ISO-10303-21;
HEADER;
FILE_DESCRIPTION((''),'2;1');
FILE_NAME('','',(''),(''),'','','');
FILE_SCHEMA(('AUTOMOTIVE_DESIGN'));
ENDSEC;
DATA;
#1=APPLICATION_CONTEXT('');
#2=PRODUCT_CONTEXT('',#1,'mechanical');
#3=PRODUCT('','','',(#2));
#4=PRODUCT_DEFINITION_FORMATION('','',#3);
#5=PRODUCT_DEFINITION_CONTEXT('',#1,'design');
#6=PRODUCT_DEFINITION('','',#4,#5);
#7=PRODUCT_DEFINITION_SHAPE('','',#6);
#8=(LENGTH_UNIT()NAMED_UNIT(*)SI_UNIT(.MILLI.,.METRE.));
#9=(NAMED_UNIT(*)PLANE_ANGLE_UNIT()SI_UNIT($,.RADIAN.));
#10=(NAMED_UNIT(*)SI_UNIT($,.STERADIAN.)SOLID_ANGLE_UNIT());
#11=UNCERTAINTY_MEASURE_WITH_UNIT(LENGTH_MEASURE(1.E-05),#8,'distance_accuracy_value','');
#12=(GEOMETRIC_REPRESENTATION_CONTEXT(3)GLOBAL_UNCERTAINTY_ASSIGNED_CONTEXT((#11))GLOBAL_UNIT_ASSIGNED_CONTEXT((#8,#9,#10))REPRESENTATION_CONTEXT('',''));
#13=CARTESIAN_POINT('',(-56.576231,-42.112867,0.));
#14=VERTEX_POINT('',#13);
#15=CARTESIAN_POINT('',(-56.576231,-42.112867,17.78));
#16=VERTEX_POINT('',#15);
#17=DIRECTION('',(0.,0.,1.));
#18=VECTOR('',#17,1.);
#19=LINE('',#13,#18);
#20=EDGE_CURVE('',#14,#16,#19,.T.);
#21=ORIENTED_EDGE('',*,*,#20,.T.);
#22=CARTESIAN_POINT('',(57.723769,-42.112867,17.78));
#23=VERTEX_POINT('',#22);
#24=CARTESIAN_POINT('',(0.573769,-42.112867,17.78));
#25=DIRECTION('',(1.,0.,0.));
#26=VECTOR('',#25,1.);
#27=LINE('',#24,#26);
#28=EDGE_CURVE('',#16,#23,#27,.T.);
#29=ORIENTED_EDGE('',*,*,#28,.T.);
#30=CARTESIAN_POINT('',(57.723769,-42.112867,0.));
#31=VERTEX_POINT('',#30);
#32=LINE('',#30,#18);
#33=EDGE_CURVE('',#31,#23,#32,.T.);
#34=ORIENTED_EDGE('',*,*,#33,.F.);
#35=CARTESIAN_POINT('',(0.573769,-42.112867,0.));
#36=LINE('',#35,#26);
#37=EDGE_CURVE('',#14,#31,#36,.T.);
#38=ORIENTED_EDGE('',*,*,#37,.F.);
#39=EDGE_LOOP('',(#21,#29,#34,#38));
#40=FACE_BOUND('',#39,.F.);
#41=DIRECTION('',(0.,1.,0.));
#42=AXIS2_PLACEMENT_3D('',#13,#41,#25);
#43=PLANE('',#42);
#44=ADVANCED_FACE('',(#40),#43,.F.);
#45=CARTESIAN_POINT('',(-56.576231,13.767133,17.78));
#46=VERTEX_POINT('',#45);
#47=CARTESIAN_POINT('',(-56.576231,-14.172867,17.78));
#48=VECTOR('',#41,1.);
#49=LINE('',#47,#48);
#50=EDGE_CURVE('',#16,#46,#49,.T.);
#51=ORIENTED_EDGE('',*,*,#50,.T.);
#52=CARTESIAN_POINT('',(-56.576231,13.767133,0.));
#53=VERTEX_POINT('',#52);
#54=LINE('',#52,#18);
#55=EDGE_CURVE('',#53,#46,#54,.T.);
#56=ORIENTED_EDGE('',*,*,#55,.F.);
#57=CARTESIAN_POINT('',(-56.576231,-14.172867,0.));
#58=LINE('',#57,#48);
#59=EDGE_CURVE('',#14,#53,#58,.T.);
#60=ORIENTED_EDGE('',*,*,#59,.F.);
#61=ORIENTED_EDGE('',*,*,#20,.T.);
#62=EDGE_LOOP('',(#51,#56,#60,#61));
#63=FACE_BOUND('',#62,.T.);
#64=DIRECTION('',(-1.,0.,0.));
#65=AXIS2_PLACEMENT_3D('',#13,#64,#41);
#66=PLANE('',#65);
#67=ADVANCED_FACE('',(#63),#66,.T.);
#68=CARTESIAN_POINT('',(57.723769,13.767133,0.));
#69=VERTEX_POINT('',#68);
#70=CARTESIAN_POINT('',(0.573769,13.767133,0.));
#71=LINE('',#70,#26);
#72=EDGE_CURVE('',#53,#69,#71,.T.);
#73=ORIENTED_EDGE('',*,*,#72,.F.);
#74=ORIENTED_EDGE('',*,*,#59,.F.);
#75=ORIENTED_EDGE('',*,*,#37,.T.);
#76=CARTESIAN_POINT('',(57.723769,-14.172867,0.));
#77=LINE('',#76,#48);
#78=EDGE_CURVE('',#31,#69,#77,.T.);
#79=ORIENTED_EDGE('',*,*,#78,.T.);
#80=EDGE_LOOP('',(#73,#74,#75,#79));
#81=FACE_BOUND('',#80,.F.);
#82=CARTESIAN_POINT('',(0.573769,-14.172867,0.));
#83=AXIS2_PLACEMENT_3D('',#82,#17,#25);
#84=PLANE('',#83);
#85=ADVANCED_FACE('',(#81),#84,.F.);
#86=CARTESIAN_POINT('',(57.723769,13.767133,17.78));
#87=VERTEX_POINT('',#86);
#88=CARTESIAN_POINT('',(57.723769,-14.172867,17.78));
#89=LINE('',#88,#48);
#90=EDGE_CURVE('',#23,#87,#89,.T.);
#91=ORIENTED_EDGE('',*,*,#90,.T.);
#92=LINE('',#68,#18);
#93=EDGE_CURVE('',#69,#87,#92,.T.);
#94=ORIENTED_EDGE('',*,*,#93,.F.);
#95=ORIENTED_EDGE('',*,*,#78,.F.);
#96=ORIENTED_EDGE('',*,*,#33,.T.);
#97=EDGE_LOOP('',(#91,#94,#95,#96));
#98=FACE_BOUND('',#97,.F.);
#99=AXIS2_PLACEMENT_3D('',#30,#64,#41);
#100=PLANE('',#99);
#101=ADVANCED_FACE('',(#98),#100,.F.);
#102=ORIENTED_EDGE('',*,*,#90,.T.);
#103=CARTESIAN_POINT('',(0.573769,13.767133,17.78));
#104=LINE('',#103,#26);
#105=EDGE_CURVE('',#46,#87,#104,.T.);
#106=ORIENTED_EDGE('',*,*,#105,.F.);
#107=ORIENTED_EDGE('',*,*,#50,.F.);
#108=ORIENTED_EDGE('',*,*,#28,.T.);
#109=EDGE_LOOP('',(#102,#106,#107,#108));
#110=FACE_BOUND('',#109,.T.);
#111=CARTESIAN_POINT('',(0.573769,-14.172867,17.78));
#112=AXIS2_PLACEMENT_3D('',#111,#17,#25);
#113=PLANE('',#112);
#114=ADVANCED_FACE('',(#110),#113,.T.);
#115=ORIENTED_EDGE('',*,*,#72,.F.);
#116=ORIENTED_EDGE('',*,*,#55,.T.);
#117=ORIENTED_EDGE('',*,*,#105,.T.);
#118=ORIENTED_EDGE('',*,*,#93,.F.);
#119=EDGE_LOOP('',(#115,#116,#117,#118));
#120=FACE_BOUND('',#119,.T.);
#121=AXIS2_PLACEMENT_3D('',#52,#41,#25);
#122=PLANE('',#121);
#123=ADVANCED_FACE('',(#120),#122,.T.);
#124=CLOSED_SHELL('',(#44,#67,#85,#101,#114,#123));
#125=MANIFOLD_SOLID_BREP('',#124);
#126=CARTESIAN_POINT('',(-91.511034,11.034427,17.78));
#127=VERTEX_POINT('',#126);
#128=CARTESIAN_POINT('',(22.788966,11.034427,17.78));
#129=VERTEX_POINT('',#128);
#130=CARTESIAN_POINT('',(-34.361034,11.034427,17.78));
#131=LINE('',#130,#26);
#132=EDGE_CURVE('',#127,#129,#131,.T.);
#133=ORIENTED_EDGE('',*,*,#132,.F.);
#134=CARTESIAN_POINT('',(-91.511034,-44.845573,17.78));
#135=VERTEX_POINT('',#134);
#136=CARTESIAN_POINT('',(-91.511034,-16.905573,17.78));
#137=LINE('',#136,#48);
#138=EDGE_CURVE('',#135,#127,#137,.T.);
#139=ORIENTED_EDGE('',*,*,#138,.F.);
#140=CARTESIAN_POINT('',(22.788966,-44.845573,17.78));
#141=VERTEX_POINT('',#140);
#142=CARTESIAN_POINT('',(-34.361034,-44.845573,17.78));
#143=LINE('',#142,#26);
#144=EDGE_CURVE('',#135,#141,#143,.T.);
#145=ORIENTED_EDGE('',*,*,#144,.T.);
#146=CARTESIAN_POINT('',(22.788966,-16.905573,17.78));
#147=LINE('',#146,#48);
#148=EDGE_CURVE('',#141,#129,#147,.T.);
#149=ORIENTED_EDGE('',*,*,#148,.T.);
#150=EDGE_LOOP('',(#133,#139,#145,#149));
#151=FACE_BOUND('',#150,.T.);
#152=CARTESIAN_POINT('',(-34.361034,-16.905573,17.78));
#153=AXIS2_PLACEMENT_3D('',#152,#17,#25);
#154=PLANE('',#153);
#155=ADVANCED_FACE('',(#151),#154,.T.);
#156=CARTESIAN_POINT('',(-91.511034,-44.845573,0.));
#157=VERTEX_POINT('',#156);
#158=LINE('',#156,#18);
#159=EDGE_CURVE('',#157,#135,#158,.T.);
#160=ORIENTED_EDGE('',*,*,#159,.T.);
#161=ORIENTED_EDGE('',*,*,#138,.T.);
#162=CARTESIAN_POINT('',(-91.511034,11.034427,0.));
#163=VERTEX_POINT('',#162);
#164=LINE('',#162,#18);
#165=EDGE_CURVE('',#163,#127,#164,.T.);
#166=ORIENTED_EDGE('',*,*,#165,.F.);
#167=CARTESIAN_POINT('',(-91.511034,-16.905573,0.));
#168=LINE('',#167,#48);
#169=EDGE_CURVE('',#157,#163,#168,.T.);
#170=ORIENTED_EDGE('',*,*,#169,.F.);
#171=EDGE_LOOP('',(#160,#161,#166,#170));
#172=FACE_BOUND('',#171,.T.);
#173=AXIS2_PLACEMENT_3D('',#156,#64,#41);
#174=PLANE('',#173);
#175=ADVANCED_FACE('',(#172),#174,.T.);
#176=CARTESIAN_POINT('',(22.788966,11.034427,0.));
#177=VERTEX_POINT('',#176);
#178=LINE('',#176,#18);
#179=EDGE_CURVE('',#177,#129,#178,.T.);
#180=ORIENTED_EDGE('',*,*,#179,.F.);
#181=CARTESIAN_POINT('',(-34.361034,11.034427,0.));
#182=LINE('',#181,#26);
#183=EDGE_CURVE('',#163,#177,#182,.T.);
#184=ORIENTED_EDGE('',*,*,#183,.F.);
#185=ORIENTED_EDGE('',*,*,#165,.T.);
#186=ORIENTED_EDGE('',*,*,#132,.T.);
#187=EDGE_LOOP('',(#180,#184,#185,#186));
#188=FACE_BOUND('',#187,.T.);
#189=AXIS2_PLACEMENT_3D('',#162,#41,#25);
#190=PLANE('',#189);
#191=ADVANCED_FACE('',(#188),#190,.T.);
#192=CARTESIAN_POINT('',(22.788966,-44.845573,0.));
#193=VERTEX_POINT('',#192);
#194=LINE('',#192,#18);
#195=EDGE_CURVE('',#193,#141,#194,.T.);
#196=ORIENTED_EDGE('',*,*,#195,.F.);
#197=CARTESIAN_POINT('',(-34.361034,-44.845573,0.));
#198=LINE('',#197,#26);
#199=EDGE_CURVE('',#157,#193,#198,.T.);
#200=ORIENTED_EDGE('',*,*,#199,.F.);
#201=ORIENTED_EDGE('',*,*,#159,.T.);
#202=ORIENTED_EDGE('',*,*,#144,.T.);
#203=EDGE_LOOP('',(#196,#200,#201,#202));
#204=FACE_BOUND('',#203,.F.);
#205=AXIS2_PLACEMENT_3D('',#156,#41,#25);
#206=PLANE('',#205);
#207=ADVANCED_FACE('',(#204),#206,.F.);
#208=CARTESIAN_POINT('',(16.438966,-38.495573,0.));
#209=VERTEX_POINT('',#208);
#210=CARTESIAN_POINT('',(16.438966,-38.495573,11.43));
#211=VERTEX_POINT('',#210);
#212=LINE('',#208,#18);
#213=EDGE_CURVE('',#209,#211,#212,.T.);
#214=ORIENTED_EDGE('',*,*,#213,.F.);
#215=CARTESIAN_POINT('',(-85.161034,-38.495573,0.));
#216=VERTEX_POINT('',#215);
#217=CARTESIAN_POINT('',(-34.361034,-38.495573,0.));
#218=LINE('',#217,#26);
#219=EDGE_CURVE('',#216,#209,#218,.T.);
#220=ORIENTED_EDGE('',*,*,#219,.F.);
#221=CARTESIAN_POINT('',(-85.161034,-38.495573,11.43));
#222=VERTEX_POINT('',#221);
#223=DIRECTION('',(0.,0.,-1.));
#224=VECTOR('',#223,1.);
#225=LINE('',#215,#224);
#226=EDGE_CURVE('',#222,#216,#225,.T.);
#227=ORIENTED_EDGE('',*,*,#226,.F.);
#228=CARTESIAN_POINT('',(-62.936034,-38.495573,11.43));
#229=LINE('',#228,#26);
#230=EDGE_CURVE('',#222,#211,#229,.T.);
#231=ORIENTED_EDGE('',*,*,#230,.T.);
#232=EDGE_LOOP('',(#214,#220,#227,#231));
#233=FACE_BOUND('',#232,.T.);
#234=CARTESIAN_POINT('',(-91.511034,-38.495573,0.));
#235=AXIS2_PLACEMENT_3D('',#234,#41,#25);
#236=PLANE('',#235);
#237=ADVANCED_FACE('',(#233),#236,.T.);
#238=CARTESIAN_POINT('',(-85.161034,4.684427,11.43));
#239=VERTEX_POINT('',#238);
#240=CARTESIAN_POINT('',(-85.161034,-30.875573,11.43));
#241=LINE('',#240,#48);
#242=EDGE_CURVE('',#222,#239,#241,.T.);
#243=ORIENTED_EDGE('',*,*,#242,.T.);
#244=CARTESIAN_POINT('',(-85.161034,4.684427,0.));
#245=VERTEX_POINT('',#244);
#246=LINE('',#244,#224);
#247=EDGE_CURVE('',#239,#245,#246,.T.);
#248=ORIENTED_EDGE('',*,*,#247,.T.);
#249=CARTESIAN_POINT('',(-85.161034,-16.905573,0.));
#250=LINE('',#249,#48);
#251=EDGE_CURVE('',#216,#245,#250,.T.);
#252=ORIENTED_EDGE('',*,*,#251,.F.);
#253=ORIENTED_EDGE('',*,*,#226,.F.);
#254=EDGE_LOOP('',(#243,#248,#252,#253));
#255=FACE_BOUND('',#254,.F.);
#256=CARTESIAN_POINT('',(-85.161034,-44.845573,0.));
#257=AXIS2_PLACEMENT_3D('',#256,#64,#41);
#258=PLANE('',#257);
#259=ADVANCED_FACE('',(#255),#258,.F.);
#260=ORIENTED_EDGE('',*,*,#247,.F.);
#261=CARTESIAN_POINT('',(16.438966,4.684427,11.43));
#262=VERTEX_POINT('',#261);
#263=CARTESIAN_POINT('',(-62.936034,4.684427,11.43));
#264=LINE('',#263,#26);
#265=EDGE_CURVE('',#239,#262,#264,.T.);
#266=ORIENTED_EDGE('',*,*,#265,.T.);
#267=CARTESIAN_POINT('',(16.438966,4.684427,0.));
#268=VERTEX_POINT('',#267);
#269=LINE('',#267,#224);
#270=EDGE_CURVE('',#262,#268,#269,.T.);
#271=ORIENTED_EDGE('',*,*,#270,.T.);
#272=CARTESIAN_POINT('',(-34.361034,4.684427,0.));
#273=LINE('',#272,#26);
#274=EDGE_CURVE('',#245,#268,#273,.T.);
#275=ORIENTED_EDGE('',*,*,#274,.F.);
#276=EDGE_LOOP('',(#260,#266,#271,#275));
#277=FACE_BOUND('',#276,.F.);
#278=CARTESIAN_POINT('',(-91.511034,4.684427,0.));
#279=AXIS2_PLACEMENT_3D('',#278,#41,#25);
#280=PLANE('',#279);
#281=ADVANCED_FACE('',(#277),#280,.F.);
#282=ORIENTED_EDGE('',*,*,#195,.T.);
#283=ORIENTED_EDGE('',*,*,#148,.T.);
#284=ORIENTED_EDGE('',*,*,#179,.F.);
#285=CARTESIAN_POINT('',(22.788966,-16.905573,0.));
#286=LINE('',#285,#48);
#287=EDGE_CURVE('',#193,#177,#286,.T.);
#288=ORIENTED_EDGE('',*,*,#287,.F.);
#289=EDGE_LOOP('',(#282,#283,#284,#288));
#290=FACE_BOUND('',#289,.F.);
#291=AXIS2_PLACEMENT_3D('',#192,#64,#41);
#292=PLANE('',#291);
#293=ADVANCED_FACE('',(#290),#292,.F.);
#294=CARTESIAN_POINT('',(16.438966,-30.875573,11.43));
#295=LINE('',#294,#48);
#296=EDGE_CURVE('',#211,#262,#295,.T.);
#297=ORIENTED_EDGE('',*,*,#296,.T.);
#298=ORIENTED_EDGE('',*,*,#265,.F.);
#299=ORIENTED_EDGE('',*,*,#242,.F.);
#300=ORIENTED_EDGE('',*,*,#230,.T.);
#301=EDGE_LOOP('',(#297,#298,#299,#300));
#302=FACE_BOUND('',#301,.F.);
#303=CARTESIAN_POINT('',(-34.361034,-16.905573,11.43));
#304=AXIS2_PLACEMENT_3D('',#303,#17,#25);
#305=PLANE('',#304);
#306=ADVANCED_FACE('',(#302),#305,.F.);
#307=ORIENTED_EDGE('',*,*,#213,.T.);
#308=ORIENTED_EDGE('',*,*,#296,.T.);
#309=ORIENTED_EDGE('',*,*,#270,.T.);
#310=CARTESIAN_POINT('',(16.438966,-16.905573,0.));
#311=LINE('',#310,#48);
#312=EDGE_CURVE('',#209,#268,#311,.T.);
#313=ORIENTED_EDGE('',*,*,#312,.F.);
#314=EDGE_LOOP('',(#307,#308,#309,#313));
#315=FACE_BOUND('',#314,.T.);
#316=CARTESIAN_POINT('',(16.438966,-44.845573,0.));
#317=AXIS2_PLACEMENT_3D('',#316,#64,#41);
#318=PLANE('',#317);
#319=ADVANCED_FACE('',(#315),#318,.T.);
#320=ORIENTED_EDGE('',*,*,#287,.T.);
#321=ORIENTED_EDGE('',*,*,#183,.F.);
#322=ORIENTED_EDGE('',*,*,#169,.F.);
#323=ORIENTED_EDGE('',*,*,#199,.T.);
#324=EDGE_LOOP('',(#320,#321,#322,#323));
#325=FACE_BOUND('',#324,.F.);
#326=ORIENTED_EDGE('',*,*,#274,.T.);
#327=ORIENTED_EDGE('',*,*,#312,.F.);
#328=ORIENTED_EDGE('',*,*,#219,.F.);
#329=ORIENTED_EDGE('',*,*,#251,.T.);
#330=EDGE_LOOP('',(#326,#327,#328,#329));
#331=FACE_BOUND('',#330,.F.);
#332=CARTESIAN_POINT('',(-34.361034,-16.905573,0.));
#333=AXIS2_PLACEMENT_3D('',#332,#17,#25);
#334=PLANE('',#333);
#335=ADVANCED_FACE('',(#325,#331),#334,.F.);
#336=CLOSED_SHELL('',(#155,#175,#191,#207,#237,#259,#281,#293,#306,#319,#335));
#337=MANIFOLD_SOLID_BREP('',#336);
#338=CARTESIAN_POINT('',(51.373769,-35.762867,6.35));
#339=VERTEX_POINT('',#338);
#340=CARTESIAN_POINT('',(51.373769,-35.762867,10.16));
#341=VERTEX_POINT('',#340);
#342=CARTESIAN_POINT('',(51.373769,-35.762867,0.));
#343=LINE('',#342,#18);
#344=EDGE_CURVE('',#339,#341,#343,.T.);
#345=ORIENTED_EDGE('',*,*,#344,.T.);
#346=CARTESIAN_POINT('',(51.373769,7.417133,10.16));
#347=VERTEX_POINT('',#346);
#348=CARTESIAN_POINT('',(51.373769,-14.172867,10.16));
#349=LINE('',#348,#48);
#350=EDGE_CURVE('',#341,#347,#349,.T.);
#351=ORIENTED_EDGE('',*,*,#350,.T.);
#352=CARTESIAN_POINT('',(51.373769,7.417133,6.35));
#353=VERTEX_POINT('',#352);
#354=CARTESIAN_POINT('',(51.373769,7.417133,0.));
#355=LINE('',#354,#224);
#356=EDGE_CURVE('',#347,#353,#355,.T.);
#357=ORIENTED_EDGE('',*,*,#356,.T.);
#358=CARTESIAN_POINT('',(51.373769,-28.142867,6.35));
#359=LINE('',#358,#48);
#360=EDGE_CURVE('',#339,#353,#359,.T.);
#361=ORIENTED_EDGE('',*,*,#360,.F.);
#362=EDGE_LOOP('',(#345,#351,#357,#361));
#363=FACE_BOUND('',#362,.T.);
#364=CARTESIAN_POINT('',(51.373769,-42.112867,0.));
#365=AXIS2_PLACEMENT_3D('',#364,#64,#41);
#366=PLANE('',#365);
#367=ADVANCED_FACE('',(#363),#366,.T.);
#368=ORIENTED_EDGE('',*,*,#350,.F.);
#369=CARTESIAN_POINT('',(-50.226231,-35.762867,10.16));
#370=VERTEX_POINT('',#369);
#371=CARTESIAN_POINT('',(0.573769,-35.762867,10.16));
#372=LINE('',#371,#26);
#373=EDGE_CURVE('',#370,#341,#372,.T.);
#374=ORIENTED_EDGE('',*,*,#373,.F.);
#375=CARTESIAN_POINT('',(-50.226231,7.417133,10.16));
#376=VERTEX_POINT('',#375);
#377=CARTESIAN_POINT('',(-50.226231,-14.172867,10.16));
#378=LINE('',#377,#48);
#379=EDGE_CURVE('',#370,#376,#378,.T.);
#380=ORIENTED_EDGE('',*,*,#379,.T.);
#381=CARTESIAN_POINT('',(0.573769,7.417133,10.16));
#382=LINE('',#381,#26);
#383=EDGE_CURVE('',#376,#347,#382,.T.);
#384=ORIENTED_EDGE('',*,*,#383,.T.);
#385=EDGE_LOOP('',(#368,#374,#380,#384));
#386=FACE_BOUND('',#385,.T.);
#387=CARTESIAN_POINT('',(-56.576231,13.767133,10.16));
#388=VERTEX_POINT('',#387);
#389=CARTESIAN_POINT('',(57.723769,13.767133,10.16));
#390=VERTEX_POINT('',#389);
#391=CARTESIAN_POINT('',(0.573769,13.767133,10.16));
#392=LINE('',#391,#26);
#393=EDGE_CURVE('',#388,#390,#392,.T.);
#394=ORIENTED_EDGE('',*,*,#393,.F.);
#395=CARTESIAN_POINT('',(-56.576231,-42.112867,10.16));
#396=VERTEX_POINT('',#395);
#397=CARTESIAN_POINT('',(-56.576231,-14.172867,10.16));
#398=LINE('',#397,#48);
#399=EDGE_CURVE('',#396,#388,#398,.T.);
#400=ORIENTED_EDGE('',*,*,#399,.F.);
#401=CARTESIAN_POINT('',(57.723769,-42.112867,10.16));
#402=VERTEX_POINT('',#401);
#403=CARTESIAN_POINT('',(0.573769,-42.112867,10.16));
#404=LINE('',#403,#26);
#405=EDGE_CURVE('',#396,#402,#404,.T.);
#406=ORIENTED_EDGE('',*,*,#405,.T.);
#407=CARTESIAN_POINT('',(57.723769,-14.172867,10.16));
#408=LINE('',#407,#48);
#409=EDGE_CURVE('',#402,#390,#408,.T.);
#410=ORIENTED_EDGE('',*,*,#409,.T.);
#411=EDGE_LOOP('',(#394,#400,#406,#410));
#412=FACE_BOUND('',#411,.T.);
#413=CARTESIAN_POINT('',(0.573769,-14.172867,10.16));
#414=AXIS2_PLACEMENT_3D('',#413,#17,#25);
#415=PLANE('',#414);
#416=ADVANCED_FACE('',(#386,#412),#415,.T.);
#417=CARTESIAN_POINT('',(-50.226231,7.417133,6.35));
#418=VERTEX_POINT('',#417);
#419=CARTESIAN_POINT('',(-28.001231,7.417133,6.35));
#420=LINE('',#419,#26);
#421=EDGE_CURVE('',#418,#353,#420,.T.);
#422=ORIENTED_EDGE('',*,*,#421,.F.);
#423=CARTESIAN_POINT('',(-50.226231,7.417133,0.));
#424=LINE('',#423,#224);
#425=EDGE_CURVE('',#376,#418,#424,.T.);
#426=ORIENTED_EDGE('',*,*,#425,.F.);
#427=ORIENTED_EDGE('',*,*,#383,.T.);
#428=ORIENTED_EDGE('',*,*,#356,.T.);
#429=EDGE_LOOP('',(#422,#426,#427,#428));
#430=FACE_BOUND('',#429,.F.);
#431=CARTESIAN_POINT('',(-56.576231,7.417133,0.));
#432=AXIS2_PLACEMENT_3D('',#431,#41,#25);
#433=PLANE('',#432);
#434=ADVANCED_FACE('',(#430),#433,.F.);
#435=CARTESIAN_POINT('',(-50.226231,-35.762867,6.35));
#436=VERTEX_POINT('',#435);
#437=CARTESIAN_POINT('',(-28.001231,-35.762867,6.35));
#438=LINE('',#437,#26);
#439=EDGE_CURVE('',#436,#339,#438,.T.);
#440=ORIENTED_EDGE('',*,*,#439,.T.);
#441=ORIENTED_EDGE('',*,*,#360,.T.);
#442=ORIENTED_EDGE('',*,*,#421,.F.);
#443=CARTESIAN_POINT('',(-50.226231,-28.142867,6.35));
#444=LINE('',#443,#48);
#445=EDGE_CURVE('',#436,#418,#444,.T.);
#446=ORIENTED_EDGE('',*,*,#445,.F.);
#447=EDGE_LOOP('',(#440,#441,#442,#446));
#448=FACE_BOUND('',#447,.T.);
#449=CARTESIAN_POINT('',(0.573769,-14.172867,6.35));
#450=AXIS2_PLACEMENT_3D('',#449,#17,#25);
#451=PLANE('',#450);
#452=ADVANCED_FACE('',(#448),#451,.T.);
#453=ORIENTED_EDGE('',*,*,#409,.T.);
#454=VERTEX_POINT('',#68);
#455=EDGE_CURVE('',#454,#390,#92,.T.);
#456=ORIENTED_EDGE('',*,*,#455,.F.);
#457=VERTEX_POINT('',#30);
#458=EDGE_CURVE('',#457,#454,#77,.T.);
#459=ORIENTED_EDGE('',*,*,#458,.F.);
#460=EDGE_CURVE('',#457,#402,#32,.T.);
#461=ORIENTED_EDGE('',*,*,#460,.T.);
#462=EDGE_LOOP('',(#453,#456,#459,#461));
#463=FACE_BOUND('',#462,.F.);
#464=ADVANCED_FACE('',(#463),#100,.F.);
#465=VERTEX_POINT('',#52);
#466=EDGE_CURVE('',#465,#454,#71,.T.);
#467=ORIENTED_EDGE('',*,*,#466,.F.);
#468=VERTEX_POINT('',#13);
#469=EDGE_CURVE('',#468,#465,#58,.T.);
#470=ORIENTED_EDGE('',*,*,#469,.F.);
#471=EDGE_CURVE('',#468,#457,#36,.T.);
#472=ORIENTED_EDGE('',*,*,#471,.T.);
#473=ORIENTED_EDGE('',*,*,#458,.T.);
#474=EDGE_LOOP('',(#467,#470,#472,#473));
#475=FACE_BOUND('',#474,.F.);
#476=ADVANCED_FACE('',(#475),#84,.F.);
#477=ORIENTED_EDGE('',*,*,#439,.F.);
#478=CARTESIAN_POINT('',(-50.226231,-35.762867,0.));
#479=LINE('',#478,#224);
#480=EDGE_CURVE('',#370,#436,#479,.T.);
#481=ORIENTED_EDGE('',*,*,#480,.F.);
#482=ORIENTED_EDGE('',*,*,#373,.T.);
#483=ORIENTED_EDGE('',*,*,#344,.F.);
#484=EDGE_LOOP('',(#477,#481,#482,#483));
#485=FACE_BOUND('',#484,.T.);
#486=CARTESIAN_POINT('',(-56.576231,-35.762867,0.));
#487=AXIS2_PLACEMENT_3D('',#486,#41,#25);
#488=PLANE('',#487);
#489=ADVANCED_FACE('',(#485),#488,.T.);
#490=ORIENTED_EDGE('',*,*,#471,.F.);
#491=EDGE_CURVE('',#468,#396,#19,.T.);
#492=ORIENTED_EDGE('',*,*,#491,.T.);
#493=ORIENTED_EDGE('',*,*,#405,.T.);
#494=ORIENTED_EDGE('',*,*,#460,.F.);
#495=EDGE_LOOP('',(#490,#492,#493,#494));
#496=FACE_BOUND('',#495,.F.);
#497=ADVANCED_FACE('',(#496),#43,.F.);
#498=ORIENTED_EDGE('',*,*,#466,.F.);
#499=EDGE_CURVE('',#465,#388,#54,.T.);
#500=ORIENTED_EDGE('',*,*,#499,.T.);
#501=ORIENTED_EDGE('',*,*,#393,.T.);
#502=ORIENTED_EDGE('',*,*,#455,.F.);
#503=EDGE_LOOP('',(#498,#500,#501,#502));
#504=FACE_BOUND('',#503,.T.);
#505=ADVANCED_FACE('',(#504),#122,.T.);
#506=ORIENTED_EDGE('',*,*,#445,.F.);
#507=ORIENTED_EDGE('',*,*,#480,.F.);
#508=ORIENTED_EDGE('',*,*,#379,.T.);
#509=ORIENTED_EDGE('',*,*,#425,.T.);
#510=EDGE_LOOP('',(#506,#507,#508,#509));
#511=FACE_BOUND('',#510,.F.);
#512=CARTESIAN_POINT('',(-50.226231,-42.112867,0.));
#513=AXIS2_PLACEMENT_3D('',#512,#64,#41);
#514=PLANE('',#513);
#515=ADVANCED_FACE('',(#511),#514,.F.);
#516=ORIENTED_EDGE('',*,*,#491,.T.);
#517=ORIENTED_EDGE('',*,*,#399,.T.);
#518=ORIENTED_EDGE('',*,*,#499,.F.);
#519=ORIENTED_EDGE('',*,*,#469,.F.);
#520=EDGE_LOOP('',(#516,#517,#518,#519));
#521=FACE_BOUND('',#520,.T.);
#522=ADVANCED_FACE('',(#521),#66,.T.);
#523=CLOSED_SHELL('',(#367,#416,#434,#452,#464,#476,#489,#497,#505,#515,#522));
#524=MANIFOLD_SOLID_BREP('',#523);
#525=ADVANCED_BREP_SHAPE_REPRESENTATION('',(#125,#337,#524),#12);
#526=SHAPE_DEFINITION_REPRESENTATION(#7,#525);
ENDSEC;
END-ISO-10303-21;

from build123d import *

# Parameters (mm, degrees)
F0_W     = 114.3
F0_H     = 55.88
F1_DEPTH = 10.16
F2_W     = 114.3
F2_H     = 55.88
F3_DEPTH = 17.78
F4_T     = -6.35
F5_T     = -6.35


with BuildPart() as f1:
    # F0 (on Top) → F1 (new body)
    with BuildSketch(Plane.XY):
        with Locations((0.5737692118, -14.1728672351)):
            Rectangle(F0_W, F0_H)
    extrude(amount=F1_DEPTH)

    # F5
    f5_openings = [f1.faces().sort_by_distance(p)[0] for p in [
        (0.573769, -14.172867, 10.16),
    ]]
    offset(amount=F5_T, openings=f5_openings)


with BuildPart() as f3:
    # F2 (on Top) → F3 (new body)
    with BuildSketch(Plane.XY):
        with Locations((-34.3610338222, -16.905572731)):
            Rectangle(F2_W, F2_H)
    extrude(amount=F3_DEPTH)

    # F4
    f4_openings = [f3.faces().sort_by_distance(p)[0] for p in [
        (-34.361034, -16.905573, 0),
    ]]
    offset(amount=F4_T, openings=f4_openings)


with BuildPart() as f3b:
    # F0 (on Top) → F3, piece 2 (new body)
    with BuildSketch(Plane.XY):
        with Locations((0.5737692118, -14.1728672351)):
            Rectangle(F0_W, F0_H)
    extrude(amount=F3_DEPTH)


solid = Compound([f1.part, f3.part, f3b.part])
